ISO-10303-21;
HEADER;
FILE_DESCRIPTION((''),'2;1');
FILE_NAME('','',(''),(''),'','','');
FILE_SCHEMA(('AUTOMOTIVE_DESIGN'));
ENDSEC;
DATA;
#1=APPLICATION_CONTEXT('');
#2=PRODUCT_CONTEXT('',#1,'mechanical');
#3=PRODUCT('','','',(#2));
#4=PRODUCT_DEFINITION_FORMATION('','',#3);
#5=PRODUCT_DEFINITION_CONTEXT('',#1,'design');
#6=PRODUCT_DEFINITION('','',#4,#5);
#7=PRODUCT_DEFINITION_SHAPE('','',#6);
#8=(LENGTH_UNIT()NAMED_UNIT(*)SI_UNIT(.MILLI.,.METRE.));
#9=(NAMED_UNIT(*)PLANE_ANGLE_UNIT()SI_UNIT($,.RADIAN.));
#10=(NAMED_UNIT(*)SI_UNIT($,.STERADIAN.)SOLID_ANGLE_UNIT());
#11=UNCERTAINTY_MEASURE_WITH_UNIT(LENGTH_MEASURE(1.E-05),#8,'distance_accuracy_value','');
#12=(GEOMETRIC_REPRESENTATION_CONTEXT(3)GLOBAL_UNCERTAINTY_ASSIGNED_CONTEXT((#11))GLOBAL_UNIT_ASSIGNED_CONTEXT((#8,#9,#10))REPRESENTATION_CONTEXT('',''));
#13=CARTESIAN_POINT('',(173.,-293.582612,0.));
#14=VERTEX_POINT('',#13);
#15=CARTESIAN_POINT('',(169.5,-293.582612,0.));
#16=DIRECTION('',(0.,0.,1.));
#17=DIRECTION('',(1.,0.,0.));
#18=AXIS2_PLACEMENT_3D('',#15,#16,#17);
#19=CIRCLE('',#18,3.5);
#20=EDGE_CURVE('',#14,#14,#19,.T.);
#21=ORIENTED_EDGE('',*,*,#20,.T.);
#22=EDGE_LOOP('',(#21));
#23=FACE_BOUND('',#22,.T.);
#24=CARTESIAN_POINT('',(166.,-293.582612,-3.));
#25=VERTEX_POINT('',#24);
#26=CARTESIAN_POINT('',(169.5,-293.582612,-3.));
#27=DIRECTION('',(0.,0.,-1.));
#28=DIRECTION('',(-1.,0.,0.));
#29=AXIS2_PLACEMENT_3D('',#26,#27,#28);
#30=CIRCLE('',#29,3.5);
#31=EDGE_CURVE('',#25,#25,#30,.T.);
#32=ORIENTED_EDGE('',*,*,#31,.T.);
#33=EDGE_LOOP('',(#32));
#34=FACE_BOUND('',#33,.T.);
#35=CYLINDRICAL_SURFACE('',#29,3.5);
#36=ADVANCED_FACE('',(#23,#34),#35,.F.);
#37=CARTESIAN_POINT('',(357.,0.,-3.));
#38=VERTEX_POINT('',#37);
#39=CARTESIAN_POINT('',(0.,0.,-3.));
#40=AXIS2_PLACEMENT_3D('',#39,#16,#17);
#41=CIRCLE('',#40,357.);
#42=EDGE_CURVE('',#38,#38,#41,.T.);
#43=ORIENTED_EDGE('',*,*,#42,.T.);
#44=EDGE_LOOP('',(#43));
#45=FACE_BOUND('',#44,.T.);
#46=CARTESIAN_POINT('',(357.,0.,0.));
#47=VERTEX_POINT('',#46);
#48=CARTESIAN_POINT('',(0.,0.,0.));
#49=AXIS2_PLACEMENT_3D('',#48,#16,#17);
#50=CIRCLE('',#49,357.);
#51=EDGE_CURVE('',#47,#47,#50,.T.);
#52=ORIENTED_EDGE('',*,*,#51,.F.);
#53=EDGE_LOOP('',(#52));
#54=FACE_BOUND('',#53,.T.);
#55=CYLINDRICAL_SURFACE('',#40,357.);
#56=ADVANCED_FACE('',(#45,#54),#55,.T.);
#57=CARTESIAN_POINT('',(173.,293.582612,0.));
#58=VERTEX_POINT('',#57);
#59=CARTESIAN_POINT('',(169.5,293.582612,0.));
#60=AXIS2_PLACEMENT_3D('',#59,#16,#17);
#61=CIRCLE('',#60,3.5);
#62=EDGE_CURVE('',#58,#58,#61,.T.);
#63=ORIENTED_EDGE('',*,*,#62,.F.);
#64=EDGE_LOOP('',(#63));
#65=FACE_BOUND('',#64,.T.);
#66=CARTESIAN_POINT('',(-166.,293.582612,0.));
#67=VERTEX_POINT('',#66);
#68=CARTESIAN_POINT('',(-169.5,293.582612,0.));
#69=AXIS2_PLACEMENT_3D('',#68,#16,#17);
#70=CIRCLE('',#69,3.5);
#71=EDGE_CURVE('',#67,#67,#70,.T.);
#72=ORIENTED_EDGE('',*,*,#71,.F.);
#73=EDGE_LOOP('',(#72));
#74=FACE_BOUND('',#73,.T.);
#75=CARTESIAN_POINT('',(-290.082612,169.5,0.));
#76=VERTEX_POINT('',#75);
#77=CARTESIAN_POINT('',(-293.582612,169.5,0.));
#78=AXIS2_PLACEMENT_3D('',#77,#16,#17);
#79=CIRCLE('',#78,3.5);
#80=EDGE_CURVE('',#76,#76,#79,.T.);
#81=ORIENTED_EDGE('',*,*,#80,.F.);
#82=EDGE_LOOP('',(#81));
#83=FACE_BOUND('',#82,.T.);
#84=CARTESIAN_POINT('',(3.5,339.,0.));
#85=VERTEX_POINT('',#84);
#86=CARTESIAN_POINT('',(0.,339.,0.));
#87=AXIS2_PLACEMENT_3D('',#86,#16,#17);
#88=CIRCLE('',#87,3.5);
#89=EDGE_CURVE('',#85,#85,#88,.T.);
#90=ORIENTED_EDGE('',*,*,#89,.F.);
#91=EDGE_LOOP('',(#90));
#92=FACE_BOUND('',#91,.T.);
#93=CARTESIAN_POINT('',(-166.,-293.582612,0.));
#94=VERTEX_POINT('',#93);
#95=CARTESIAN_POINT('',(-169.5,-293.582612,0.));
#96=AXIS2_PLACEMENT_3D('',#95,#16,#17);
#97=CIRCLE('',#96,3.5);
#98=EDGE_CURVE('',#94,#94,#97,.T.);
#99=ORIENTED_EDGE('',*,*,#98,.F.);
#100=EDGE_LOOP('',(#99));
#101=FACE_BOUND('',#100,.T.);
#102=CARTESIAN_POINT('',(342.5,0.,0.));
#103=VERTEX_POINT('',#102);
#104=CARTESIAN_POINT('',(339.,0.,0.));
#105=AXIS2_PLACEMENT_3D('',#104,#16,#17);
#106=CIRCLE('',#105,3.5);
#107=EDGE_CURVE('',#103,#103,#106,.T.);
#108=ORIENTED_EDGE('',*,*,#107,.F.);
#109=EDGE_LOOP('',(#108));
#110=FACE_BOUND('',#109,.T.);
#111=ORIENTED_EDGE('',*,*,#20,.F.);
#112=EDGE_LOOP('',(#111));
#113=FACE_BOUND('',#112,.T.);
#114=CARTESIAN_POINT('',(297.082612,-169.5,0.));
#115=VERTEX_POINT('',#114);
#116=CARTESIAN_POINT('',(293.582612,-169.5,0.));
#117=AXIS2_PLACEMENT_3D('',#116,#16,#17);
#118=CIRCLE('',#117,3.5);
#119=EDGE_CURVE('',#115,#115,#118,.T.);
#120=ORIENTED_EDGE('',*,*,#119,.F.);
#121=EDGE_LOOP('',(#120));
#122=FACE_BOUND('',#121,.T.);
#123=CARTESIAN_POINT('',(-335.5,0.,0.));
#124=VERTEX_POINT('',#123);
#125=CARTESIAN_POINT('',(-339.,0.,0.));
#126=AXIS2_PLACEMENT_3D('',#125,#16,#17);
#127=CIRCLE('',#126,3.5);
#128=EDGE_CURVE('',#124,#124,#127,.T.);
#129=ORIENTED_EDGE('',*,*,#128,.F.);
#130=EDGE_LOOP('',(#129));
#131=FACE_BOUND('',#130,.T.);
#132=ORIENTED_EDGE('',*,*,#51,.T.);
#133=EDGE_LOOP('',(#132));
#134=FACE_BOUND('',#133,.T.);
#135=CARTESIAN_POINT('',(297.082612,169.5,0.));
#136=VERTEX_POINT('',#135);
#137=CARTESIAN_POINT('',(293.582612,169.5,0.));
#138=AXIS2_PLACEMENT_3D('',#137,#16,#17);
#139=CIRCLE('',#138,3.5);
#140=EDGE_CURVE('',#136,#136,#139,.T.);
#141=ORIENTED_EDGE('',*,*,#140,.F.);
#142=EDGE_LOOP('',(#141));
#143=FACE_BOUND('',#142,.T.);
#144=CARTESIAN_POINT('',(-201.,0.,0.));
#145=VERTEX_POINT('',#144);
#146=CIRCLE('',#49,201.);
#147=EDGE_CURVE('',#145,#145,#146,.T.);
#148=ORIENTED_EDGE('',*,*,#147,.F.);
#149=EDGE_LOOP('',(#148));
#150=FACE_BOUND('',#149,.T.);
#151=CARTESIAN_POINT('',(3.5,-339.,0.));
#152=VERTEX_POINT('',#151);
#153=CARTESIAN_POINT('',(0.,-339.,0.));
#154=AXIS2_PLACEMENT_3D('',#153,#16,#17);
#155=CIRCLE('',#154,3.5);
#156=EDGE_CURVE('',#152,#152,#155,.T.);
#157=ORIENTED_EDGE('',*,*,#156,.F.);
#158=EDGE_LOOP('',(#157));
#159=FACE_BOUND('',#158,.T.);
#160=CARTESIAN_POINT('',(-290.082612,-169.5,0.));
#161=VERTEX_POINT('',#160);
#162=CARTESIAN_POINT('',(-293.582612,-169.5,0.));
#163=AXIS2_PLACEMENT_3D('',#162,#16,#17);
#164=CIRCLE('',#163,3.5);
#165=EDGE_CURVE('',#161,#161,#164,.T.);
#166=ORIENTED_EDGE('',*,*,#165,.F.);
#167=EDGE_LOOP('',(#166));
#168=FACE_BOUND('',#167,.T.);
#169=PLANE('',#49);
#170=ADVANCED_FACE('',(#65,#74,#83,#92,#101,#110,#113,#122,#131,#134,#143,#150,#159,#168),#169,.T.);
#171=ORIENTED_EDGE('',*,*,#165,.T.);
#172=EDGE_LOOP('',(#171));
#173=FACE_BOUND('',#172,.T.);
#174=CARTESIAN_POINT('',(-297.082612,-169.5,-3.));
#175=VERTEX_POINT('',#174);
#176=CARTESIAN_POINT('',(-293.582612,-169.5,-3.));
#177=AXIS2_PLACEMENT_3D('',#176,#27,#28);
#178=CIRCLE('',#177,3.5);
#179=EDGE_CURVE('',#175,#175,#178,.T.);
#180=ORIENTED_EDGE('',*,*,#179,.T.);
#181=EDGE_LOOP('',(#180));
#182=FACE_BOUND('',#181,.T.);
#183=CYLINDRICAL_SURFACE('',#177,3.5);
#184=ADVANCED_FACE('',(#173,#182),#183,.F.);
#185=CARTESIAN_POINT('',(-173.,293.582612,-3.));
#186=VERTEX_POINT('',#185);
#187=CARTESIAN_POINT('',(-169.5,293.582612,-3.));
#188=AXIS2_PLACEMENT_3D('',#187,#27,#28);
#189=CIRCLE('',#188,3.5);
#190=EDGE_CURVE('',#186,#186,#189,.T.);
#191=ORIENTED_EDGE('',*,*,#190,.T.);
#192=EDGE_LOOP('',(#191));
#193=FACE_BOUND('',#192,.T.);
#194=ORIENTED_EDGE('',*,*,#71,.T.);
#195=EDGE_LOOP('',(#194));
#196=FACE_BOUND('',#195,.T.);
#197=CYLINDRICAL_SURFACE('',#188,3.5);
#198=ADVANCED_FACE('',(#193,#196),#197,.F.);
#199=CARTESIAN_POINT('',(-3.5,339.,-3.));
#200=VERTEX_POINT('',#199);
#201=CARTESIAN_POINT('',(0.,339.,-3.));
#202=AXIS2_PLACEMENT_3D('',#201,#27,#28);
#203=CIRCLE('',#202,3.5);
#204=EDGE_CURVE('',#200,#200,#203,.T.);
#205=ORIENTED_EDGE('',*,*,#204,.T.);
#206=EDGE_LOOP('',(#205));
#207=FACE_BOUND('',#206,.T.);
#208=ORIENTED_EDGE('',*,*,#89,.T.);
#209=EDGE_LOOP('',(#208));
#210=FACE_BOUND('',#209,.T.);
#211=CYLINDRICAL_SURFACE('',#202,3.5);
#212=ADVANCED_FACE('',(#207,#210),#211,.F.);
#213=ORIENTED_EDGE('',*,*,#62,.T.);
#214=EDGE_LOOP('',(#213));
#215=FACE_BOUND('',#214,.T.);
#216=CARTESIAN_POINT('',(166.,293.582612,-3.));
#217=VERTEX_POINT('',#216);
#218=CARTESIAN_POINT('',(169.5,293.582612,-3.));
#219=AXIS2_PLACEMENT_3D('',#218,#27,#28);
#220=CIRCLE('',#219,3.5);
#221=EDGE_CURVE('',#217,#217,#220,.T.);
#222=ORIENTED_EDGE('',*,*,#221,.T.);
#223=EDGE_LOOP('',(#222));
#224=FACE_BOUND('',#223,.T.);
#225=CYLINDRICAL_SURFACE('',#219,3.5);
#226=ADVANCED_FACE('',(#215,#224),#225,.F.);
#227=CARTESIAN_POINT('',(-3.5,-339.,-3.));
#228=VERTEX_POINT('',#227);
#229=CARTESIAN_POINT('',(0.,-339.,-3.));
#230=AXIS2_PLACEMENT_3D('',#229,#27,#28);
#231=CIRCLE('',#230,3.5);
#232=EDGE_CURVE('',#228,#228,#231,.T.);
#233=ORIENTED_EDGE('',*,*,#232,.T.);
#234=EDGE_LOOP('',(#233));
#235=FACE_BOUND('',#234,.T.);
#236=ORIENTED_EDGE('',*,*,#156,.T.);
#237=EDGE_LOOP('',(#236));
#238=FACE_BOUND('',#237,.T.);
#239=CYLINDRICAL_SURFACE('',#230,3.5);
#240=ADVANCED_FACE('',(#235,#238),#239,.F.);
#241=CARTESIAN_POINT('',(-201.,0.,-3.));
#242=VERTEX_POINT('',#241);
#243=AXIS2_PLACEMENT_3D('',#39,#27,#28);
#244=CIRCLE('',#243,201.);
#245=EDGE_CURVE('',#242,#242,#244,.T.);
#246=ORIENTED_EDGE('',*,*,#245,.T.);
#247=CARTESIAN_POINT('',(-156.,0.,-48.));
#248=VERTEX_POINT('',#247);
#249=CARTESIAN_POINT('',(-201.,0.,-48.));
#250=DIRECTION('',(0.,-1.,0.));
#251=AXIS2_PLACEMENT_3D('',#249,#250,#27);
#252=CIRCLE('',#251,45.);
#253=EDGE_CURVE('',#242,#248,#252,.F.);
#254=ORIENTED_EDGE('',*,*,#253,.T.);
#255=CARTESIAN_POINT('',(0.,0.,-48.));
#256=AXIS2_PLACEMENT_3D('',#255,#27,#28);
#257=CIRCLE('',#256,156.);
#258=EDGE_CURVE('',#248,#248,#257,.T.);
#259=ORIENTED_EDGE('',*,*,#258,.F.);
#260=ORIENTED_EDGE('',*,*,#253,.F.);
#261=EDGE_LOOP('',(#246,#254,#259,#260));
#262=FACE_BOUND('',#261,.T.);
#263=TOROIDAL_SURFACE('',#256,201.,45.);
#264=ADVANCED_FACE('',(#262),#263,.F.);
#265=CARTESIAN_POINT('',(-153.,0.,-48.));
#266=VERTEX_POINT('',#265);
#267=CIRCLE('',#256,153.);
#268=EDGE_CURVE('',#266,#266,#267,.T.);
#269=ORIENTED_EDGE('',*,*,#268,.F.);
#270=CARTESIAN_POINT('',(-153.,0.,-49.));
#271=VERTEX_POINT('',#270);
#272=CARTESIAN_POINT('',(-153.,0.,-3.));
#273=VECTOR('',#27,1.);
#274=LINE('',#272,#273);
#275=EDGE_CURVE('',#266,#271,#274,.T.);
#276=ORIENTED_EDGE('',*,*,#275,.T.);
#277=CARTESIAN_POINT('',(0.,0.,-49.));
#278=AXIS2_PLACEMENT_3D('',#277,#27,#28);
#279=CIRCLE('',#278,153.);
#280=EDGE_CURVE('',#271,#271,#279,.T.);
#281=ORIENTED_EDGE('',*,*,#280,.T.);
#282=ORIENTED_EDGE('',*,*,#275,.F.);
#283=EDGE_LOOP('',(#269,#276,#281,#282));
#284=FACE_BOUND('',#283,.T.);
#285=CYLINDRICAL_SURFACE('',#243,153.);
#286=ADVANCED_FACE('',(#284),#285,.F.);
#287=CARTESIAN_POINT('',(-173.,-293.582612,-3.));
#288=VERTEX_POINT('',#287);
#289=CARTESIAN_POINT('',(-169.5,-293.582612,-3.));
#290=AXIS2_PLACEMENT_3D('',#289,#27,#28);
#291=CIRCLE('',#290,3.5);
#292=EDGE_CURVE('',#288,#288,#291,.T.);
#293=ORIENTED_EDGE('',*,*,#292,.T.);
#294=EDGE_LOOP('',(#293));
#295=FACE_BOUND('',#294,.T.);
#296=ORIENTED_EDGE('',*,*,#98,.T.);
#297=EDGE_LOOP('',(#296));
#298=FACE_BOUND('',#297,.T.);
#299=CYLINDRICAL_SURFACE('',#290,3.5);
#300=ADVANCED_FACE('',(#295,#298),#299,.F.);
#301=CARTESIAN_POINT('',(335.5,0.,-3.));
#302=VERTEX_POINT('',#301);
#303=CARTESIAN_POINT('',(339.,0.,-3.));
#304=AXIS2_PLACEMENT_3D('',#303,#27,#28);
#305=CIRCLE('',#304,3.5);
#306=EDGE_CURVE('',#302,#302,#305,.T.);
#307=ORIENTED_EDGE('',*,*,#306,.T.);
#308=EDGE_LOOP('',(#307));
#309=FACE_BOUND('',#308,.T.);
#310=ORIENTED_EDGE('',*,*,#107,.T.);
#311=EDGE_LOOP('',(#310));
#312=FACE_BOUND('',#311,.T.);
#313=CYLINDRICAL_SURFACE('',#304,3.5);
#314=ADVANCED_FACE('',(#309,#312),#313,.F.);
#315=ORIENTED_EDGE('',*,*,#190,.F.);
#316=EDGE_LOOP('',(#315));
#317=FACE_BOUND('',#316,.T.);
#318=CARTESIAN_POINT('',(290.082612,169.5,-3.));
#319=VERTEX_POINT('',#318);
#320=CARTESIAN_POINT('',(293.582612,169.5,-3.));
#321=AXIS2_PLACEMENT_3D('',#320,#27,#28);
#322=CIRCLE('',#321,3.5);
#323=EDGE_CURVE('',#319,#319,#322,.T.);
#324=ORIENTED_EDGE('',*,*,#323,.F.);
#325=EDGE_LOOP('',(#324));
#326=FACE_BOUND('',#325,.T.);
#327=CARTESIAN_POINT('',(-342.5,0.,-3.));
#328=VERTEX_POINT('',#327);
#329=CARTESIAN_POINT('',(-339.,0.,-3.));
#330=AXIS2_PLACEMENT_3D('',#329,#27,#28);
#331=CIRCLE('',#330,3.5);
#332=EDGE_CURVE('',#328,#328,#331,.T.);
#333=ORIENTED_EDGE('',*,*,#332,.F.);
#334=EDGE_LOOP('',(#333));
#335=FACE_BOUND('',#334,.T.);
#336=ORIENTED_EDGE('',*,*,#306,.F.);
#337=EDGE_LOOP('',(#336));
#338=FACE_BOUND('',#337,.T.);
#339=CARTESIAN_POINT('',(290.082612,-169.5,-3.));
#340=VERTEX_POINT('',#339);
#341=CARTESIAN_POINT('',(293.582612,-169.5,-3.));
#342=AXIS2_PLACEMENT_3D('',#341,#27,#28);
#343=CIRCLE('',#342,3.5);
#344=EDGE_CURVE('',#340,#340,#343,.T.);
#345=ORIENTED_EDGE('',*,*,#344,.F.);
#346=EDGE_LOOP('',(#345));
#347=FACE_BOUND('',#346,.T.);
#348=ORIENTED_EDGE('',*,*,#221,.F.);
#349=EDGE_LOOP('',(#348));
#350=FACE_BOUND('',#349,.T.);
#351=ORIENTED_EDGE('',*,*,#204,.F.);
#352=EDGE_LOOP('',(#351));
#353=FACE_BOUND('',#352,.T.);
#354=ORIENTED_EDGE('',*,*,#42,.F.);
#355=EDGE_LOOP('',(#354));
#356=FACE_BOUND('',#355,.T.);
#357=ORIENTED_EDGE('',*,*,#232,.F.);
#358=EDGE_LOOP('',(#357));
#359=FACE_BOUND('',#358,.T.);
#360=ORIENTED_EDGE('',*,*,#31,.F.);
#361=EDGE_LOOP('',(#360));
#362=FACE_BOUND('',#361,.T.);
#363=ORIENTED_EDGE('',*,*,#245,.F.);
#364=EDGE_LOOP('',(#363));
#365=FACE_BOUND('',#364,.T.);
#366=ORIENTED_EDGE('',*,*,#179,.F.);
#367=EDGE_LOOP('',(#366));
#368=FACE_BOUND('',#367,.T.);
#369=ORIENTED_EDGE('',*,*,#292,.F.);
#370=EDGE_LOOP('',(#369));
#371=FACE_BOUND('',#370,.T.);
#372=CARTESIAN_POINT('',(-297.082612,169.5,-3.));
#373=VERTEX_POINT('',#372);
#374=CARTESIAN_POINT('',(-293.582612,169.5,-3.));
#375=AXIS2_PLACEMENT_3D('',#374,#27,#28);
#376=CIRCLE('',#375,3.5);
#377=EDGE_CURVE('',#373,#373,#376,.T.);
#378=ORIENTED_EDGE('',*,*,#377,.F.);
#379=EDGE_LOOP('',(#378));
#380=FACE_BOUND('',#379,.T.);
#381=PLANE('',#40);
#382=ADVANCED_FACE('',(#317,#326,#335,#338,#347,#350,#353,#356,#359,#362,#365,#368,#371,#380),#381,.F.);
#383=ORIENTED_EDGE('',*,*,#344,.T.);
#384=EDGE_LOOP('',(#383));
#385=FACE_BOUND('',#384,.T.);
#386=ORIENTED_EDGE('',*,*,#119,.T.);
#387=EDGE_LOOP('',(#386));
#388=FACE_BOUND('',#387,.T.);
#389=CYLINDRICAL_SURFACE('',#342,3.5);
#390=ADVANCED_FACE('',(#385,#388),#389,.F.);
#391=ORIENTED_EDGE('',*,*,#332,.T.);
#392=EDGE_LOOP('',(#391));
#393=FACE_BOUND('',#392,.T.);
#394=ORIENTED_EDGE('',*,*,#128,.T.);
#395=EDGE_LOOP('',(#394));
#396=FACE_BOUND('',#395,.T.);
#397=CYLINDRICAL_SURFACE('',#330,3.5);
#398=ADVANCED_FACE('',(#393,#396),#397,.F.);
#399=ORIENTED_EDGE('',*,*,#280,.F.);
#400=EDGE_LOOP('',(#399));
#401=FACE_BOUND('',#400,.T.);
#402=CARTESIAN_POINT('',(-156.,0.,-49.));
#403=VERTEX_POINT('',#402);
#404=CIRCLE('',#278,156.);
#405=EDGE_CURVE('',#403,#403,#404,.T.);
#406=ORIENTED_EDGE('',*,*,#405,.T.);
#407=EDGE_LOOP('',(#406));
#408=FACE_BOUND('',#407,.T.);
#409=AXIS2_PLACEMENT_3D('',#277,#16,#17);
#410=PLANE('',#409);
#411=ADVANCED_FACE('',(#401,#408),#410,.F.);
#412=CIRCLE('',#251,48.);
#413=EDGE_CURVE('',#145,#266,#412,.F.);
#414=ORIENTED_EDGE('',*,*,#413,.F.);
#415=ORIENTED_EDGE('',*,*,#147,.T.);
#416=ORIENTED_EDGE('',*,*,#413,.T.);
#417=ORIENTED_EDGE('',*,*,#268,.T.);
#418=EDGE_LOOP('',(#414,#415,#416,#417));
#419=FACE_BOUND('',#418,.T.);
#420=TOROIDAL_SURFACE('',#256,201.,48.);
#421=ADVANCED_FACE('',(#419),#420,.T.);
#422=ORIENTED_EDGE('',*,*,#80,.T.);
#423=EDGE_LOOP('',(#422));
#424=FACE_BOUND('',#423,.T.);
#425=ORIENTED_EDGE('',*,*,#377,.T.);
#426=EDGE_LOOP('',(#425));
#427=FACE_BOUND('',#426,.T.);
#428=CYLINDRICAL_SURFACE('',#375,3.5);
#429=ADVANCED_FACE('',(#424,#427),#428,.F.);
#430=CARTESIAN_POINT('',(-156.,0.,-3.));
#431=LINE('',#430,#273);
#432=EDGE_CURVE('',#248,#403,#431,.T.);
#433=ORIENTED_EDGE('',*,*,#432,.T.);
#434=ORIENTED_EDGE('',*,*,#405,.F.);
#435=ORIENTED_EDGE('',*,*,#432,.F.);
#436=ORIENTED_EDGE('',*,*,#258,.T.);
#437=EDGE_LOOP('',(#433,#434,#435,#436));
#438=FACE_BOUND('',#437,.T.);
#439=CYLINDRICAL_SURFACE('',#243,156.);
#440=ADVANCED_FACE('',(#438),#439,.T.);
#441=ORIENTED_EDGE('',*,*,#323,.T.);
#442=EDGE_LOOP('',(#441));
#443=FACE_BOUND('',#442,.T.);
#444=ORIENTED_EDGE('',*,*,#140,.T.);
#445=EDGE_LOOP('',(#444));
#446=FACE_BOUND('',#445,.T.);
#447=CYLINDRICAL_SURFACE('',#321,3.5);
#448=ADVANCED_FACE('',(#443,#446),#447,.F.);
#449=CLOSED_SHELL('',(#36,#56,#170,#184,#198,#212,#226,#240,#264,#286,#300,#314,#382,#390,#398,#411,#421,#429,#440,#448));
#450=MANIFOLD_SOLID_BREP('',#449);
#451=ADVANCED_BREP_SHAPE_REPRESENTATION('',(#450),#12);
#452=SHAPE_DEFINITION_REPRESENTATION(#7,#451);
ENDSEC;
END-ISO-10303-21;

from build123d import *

# Parameters (mm, degrees)
SKETCH1_R          = 357
BASE_FLANGE1_DEPTH = 3
SKETCH2_R          = 156
CUT_EXTRUDE1_DEPTH = 10
CIRPATTERN1_COUNT  = 12


# Read off the part's stored shape, not the designer's step: Edge-Flange1
# Sheet-metal steps are written as plain solids
with BuildPart() as part:
    # Sketch1 → Base-Flange1 (new body)
    with BuildSketch(Plane.XY):
        Circle(SKETCH1_R)
    extrude(amount=-BASE_FLANGE1_DEPTH)

    # Sketch2 → Cut-Extrude1 (cut)
    with BuildSketch(Plane(origin=(0, 0, -3), x_dir=(-1, 0, 0), z_dir=(0, 0, -1))):
        Circle(SKETCH2_R)
    extrude(amount=-CUT_EXTRUDE1_DEPTH, mode=Mode.SUBTRACT)

    # Edge-Flange1 outline → Edge-Flange1 (revolve, cut)
    with BuildSketch(Plane.XZ):
        with BuildLine():
            Line((156, -3), (184.296706911, -3))
            ThreePointArc((184.296706911, -3), (192.514718626, -0.755952756), (201, 0))
            Line((201, 0), (156, 0))
            Line((156, 0), (156, -3))
        make_face()
    revolve(axis=Axis((0, 0, 0), (0, 0, 1)), mode=Mode.SUBTRACT)

    # Edge-Flange1 2 outline → Edge-Flange1 2 (revolve)
    with BuildSketch(Plane.XZ):
        with BuildLine():
            Line((153, -48), (153, -49))
            Line((153, -49), (156, -49))
            Line((156, -49), (156, -48))
            ThreePointArc((156, -48), (169.180194847, -16.180194847), (201, -3))
            Line((201, -3), (184.296706911, -3))
            ThreePointArc((184.296706911, -3), (161.593413823, -20.593413823), (153, -48))
        make_face()
    revolve(axis=Axis((0, 0, 0), (0, 0, 1)))

    # Sketch10 → M8x1.0 Tapped Hole1 (revolve, cut)
    with BuildSketch(Plane(origin=(-339, 0, -3), x_dir=(0, 1, 0), z_dir=(1, 0, 0))):
        Polygon((0, 0), (0, 21.103012167), (3.5, 19), (3.5, 0), align=None)
    m8x1_0_tapped_hole1 = revolve(axis=Axis((-339, 0, -9.35), (0, 0, 1)), mode=Mode.SUBTRACT)

    # CirPattern1: M8x1.0 Tapped Hole1 ×12 about axis
    cirpattern1_axis = Axis((0, 0, 0), (0, 0, 1))
    for i in range(1, CIRPATTERN1_COUNT):
        add(m8x1_0_tapped_hole1.rotate(cirpattern1_axis, i * 360 / CIRPATTERN1_COUNT), mode=Mode.SUBTRACT)


solid = part.part
